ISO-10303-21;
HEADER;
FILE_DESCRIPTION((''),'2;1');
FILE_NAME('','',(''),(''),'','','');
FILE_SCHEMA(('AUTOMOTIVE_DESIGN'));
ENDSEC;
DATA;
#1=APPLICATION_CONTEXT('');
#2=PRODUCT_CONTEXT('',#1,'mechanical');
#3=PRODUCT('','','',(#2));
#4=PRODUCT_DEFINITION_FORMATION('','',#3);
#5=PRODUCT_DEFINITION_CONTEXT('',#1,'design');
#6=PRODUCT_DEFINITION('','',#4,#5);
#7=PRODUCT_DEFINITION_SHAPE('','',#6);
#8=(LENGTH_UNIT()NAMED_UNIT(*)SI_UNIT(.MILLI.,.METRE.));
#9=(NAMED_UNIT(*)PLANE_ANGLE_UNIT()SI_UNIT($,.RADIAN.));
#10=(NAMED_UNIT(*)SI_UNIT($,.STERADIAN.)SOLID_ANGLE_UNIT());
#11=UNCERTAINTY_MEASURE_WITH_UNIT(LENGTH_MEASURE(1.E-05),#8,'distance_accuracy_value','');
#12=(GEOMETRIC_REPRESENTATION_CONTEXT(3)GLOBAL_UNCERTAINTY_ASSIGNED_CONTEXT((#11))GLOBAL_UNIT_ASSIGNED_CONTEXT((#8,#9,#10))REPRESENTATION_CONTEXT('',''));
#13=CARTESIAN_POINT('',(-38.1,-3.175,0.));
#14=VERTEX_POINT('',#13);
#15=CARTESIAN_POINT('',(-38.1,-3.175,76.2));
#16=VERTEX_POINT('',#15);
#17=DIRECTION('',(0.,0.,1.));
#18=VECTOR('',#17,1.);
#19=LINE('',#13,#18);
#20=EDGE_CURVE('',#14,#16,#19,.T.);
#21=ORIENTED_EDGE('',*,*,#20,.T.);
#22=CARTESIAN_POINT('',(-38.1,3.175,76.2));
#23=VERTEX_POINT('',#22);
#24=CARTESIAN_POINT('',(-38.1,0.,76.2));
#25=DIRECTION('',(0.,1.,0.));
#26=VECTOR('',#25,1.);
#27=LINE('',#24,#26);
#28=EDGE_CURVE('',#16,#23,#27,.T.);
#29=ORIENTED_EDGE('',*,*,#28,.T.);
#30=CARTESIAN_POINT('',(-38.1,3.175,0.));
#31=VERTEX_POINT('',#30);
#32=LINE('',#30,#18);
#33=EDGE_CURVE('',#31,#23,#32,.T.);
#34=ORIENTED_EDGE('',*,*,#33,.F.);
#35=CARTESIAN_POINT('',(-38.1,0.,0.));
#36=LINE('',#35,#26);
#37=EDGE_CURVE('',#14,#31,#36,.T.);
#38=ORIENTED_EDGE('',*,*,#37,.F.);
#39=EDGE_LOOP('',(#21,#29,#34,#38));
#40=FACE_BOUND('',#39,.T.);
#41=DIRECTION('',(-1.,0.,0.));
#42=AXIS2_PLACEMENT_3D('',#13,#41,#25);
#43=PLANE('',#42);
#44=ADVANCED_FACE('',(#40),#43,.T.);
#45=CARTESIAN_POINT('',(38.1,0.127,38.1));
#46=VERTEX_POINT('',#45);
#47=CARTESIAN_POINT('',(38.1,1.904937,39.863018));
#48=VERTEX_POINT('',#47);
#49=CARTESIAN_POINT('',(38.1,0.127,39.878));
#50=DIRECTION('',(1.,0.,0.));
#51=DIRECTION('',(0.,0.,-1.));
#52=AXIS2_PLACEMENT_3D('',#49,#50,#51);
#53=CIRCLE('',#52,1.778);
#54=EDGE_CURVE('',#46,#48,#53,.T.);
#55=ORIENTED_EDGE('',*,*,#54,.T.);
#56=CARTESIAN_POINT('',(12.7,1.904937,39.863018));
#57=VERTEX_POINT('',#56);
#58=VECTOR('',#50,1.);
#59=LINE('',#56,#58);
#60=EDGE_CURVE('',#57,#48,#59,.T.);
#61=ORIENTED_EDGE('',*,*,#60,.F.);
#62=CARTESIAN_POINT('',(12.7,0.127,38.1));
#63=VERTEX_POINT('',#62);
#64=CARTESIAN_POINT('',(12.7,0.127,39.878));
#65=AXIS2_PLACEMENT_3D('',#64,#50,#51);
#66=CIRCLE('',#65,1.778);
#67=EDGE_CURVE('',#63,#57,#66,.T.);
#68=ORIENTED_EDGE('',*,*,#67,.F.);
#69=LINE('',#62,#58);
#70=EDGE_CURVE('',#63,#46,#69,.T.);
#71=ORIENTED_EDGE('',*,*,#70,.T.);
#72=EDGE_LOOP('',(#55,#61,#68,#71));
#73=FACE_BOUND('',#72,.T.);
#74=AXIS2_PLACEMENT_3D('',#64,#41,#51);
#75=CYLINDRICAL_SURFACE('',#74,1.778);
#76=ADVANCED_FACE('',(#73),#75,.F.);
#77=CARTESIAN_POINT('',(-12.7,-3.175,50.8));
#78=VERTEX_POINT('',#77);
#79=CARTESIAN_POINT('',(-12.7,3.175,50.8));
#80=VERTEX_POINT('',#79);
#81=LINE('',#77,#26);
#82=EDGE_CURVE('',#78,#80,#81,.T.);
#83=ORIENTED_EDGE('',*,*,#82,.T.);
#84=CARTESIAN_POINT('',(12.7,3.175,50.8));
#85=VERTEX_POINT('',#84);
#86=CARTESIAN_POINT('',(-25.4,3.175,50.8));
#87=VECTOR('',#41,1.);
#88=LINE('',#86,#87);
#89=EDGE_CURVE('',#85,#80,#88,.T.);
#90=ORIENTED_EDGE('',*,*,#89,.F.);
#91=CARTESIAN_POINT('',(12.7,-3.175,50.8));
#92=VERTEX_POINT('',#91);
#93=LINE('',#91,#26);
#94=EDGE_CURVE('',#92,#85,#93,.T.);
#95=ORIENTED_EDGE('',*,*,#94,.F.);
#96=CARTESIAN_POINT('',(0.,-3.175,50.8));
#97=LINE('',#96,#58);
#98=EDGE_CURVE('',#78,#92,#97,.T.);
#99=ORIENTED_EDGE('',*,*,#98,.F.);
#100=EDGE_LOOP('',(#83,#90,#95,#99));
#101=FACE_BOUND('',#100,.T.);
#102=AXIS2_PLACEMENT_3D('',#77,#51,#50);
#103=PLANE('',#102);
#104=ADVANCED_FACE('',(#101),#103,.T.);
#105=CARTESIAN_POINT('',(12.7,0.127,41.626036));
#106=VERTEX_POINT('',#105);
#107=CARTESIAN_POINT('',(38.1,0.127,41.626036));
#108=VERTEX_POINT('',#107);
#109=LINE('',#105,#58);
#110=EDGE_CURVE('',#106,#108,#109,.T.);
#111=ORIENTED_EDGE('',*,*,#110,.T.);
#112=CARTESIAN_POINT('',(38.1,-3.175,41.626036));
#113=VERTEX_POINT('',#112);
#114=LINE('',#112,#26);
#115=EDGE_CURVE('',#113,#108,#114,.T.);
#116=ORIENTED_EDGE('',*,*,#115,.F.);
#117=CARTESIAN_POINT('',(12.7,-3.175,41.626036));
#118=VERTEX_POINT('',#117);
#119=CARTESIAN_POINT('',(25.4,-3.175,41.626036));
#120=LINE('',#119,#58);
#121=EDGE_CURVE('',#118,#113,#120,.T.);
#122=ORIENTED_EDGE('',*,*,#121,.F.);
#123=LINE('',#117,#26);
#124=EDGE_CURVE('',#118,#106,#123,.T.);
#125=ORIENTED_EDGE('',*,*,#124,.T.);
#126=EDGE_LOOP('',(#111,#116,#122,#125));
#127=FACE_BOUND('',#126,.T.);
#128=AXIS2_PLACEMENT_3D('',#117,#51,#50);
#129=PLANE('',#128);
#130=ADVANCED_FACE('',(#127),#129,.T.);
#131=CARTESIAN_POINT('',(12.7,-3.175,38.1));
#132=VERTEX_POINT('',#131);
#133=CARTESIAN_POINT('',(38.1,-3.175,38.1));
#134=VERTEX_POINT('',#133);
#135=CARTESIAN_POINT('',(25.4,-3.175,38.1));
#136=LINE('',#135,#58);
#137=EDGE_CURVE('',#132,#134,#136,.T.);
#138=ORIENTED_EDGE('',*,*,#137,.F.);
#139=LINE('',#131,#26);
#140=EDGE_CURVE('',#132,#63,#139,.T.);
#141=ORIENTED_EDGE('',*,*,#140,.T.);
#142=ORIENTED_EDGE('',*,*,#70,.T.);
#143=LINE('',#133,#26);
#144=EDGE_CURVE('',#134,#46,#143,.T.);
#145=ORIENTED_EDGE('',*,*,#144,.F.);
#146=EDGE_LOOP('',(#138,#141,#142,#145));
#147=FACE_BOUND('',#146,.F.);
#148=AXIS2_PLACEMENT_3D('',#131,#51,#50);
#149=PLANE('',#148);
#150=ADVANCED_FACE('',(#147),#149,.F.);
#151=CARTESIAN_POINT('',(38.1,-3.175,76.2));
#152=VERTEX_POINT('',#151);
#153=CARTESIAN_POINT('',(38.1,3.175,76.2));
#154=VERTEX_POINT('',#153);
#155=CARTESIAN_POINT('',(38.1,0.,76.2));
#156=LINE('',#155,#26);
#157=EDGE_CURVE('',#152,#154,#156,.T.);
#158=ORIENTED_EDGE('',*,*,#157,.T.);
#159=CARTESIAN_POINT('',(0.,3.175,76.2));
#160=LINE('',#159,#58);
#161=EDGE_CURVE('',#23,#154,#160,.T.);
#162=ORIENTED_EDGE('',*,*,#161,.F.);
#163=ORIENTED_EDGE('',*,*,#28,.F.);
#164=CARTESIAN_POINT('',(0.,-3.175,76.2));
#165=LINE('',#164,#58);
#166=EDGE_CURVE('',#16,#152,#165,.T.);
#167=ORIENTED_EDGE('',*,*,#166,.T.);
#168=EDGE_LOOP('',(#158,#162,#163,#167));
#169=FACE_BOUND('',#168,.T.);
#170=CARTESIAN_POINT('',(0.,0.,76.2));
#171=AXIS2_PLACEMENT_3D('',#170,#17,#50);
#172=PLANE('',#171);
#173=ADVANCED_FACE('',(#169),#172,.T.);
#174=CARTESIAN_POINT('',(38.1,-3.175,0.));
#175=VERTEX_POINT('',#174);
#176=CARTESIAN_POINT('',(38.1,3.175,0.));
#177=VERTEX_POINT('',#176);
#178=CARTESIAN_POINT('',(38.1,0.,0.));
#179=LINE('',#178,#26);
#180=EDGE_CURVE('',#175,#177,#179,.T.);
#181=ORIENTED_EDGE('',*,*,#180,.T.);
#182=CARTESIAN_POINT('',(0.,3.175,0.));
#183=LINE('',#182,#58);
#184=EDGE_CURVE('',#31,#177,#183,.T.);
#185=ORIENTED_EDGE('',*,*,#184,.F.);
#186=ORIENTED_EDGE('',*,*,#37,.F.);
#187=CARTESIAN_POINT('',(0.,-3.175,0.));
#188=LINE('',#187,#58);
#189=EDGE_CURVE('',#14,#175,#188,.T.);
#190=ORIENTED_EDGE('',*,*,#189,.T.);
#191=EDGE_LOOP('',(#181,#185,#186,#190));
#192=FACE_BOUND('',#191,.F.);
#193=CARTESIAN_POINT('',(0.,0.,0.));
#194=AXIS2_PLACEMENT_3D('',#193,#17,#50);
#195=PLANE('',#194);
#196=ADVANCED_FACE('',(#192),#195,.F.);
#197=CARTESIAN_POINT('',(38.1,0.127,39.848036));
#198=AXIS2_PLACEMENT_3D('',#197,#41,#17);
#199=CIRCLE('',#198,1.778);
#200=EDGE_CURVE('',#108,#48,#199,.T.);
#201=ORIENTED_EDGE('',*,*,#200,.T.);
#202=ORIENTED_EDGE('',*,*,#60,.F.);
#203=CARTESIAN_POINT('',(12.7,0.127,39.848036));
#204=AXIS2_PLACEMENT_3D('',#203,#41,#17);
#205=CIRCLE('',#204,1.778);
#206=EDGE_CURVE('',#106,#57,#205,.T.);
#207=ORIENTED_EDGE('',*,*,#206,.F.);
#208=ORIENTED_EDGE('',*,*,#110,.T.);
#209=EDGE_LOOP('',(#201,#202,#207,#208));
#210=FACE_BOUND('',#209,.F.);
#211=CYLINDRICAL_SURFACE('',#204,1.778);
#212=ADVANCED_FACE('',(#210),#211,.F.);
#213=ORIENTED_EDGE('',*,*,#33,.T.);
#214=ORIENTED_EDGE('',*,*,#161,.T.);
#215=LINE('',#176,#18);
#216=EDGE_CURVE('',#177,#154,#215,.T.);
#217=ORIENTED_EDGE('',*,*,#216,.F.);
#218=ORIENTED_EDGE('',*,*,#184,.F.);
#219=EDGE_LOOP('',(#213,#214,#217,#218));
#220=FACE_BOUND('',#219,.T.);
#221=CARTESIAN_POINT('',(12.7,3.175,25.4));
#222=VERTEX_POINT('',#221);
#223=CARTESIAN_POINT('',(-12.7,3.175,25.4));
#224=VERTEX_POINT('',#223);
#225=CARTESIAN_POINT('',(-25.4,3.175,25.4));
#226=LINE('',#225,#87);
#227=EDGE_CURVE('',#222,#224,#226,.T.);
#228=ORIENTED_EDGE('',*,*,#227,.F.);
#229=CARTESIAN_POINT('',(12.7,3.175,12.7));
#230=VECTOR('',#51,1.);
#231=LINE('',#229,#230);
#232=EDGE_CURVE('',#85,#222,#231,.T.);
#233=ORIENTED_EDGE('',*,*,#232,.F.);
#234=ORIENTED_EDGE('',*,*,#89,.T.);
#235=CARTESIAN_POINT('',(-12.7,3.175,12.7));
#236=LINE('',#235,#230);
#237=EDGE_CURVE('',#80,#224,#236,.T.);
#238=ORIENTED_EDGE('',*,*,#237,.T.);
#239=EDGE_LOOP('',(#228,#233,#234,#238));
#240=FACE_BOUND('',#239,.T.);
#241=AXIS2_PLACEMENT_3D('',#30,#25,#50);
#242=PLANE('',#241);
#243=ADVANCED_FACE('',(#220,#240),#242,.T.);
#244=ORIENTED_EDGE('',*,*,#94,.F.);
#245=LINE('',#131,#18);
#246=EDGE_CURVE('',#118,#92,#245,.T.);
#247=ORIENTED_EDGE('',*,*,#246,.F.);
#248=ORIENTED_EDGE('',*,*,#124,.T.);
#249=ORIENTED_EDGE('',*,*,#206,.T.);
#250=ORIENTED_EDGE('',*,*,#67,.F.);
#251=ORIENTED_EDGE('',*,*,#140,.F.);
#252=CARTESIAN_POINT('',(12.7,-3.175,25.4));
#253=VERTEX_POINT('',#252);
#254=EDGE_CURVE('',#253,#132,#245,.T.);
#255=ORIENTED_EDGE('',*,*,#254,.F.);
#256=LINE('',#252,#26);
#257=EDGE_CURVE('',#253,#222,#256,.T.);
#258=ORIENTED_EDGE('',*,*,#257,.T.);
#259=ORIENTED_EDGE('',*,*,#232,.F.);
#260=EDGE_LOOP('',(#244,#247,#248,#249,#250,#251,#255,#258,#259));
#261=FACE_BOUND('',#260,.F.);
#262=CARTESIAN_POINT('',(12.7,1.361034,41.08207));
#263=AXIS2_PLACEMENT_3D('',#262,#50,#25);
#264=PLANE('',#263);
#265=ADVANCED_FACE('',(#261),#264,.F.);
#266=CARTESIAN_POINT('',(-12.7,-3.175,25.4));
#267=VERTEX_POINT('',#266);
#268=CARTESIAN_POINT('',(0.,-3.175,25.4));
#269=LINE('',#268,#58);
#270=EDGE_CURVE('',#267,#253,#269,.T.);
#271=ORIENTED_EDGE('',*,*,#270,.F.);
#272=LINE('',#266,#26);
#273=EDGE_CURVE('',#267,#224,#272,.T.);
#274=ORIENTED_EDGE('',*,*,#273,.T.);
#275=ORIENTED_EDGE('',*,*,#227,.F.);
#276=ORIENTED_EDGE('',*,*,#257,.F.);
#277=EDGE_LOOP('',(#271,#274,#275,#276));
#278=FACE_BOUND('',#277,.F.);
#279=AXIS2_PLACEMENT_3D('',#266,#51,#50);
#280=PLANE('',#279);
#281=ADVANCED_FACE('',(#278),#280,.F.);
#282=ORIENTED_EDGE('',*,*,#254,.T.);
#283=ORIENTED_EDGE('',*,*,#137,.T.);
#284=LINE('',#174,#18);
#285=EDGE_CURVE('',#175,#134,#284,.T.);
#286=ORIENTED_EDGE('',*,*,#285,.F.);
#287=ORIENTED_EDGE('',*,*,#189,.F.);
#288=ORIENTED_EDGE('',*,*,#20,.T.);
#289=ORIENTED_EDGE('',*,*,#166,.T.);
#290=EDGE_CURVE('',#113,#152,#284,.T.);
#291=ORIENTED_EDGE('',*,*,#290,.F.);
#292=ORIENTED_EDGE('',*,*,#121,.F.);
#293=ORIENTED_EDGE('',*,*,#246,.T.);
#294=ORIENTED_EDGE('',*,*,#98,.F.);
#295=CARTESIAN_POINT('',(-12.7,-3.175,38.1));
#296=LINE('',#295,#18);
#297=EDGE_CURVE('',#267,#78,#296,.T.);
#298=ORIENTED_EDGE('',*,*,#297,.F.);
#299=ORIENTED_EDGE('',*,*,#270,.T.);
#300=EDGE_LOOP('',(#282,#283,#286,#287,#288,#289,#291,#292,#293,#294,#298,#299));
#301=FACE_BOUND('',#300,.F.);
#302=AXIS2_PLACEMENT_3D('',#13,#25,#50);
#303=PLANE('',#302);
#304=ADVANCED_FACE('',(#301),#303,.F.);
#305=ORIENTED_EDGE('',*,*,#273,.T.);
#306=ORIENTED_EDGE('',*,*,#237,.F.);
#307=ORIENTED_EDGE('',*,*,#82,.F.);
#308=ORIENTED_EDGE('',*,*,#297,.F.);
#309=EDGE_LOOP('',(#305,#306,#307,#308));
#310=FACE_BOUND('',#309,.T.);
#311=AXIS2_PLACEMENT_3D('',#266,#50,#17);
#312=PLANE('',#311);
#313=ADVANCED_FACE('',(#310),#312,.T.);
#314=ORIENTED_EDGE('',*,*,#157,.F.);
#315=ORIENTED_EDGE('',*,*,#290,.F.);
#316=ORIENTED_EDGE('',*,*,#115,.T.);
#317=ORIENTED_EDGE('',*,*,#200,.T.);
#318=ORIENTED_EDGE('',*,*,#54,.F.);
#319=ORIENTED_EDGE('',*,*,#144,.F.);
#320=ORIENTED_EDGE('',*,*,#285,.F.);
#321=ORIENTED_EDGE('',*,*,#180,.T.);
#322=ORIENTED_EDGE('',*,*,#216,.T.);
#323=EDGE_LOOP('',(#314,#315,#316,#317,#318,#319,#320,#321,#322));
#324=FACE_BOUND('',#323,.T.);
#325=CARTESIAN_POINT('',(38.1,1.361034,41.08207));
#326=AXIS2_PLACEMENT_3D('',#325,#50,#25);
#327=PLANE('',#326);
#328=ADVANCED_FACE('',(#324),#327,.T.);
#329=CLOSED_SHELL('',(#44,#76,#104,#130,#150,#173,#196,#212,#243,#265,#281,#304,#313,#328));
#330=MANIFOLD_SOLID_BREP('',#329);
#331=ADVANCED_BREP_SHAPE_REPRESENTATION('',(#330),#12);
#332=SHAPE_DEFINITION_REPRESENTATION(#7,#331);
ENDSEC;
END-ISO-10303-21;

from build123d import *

# Parameters (mm, degrees)
F0_W        = 76.2
F0_H        = 6.35
F1_DEPTH    = 76.2
F2_W        = 25.4
F2_H        = 25.4
F3_DEPTH    = 25.4
F4_W        = 25.4
F4_H        = 3.5260361671
F5_DEPTH    = 5.08
F8_T1_DEPTH = 25.4


# Not quite as in the source:
# - a fillet or chamfer that OpenCascade refuses, or shapes differently, is made with other operations: its cross-section is extruded or revolved along the edge and cut away or added
# - the program builds the solid bodies; features that only make, move or delete a surface that nothing else refers to are left out


with BuildPart() as f1:
    # F0 (on Top) → F1 (new body)
    with BuildSketch(Plane.XY):
        Rectangle(F0_W, F0_H)
    extrude(amount=F1_DEPTH)

    # F2 (on face) → F3 (cut)
    with BuildSketch(Plane.XZ.offset(3.175)):
        with Locations((0, 38.1)):
            Rectangle(F2_W, F2_H)
    extrude(amount=-F3_DEPTH, mode=Mode.SUBTRACT)

    # F4 (on face) → F5 (cut)
    with BuildSketch(Plane.XZ.offset(3.175)):
        with Locations((25.4, 39.8630180836)):
            Rectangle(F4_W, F4_H)
    extrude(amount=-F5_DEPTH, mode=Mode.SUBTRACT)

    # F8: fillet of radius 1.778 on 2 edges, made by hand

    # F8_s2 → F8_t1 (join)
    with BuildSketch(Plane.YZ.offset(12.7)):
        with BuildLine():
            ThreePointArc((0.127, 41.6260361671), (1.3842358569, 41.1052720241), (1.905, 39.8480361671))
            Line((1.905, 39.8480361671), (1.905, 41.6260361671))
            Line((1.905, 41.6260361671), (0.127, 41.6260361671))
        make_face()
        with BuildLine():
            ThreePointArc((0.127, 38.1), (1.3842358569, 38.6207641431), (1.905, 39.878))
            Line((1.905, 39.878), (1.905, 38.1))
            Line((1.905, 38.1), (0.127, 38.1))
        make_face()
    extrude(amount=F8_T1_DEPTH)


solid = f1.part
